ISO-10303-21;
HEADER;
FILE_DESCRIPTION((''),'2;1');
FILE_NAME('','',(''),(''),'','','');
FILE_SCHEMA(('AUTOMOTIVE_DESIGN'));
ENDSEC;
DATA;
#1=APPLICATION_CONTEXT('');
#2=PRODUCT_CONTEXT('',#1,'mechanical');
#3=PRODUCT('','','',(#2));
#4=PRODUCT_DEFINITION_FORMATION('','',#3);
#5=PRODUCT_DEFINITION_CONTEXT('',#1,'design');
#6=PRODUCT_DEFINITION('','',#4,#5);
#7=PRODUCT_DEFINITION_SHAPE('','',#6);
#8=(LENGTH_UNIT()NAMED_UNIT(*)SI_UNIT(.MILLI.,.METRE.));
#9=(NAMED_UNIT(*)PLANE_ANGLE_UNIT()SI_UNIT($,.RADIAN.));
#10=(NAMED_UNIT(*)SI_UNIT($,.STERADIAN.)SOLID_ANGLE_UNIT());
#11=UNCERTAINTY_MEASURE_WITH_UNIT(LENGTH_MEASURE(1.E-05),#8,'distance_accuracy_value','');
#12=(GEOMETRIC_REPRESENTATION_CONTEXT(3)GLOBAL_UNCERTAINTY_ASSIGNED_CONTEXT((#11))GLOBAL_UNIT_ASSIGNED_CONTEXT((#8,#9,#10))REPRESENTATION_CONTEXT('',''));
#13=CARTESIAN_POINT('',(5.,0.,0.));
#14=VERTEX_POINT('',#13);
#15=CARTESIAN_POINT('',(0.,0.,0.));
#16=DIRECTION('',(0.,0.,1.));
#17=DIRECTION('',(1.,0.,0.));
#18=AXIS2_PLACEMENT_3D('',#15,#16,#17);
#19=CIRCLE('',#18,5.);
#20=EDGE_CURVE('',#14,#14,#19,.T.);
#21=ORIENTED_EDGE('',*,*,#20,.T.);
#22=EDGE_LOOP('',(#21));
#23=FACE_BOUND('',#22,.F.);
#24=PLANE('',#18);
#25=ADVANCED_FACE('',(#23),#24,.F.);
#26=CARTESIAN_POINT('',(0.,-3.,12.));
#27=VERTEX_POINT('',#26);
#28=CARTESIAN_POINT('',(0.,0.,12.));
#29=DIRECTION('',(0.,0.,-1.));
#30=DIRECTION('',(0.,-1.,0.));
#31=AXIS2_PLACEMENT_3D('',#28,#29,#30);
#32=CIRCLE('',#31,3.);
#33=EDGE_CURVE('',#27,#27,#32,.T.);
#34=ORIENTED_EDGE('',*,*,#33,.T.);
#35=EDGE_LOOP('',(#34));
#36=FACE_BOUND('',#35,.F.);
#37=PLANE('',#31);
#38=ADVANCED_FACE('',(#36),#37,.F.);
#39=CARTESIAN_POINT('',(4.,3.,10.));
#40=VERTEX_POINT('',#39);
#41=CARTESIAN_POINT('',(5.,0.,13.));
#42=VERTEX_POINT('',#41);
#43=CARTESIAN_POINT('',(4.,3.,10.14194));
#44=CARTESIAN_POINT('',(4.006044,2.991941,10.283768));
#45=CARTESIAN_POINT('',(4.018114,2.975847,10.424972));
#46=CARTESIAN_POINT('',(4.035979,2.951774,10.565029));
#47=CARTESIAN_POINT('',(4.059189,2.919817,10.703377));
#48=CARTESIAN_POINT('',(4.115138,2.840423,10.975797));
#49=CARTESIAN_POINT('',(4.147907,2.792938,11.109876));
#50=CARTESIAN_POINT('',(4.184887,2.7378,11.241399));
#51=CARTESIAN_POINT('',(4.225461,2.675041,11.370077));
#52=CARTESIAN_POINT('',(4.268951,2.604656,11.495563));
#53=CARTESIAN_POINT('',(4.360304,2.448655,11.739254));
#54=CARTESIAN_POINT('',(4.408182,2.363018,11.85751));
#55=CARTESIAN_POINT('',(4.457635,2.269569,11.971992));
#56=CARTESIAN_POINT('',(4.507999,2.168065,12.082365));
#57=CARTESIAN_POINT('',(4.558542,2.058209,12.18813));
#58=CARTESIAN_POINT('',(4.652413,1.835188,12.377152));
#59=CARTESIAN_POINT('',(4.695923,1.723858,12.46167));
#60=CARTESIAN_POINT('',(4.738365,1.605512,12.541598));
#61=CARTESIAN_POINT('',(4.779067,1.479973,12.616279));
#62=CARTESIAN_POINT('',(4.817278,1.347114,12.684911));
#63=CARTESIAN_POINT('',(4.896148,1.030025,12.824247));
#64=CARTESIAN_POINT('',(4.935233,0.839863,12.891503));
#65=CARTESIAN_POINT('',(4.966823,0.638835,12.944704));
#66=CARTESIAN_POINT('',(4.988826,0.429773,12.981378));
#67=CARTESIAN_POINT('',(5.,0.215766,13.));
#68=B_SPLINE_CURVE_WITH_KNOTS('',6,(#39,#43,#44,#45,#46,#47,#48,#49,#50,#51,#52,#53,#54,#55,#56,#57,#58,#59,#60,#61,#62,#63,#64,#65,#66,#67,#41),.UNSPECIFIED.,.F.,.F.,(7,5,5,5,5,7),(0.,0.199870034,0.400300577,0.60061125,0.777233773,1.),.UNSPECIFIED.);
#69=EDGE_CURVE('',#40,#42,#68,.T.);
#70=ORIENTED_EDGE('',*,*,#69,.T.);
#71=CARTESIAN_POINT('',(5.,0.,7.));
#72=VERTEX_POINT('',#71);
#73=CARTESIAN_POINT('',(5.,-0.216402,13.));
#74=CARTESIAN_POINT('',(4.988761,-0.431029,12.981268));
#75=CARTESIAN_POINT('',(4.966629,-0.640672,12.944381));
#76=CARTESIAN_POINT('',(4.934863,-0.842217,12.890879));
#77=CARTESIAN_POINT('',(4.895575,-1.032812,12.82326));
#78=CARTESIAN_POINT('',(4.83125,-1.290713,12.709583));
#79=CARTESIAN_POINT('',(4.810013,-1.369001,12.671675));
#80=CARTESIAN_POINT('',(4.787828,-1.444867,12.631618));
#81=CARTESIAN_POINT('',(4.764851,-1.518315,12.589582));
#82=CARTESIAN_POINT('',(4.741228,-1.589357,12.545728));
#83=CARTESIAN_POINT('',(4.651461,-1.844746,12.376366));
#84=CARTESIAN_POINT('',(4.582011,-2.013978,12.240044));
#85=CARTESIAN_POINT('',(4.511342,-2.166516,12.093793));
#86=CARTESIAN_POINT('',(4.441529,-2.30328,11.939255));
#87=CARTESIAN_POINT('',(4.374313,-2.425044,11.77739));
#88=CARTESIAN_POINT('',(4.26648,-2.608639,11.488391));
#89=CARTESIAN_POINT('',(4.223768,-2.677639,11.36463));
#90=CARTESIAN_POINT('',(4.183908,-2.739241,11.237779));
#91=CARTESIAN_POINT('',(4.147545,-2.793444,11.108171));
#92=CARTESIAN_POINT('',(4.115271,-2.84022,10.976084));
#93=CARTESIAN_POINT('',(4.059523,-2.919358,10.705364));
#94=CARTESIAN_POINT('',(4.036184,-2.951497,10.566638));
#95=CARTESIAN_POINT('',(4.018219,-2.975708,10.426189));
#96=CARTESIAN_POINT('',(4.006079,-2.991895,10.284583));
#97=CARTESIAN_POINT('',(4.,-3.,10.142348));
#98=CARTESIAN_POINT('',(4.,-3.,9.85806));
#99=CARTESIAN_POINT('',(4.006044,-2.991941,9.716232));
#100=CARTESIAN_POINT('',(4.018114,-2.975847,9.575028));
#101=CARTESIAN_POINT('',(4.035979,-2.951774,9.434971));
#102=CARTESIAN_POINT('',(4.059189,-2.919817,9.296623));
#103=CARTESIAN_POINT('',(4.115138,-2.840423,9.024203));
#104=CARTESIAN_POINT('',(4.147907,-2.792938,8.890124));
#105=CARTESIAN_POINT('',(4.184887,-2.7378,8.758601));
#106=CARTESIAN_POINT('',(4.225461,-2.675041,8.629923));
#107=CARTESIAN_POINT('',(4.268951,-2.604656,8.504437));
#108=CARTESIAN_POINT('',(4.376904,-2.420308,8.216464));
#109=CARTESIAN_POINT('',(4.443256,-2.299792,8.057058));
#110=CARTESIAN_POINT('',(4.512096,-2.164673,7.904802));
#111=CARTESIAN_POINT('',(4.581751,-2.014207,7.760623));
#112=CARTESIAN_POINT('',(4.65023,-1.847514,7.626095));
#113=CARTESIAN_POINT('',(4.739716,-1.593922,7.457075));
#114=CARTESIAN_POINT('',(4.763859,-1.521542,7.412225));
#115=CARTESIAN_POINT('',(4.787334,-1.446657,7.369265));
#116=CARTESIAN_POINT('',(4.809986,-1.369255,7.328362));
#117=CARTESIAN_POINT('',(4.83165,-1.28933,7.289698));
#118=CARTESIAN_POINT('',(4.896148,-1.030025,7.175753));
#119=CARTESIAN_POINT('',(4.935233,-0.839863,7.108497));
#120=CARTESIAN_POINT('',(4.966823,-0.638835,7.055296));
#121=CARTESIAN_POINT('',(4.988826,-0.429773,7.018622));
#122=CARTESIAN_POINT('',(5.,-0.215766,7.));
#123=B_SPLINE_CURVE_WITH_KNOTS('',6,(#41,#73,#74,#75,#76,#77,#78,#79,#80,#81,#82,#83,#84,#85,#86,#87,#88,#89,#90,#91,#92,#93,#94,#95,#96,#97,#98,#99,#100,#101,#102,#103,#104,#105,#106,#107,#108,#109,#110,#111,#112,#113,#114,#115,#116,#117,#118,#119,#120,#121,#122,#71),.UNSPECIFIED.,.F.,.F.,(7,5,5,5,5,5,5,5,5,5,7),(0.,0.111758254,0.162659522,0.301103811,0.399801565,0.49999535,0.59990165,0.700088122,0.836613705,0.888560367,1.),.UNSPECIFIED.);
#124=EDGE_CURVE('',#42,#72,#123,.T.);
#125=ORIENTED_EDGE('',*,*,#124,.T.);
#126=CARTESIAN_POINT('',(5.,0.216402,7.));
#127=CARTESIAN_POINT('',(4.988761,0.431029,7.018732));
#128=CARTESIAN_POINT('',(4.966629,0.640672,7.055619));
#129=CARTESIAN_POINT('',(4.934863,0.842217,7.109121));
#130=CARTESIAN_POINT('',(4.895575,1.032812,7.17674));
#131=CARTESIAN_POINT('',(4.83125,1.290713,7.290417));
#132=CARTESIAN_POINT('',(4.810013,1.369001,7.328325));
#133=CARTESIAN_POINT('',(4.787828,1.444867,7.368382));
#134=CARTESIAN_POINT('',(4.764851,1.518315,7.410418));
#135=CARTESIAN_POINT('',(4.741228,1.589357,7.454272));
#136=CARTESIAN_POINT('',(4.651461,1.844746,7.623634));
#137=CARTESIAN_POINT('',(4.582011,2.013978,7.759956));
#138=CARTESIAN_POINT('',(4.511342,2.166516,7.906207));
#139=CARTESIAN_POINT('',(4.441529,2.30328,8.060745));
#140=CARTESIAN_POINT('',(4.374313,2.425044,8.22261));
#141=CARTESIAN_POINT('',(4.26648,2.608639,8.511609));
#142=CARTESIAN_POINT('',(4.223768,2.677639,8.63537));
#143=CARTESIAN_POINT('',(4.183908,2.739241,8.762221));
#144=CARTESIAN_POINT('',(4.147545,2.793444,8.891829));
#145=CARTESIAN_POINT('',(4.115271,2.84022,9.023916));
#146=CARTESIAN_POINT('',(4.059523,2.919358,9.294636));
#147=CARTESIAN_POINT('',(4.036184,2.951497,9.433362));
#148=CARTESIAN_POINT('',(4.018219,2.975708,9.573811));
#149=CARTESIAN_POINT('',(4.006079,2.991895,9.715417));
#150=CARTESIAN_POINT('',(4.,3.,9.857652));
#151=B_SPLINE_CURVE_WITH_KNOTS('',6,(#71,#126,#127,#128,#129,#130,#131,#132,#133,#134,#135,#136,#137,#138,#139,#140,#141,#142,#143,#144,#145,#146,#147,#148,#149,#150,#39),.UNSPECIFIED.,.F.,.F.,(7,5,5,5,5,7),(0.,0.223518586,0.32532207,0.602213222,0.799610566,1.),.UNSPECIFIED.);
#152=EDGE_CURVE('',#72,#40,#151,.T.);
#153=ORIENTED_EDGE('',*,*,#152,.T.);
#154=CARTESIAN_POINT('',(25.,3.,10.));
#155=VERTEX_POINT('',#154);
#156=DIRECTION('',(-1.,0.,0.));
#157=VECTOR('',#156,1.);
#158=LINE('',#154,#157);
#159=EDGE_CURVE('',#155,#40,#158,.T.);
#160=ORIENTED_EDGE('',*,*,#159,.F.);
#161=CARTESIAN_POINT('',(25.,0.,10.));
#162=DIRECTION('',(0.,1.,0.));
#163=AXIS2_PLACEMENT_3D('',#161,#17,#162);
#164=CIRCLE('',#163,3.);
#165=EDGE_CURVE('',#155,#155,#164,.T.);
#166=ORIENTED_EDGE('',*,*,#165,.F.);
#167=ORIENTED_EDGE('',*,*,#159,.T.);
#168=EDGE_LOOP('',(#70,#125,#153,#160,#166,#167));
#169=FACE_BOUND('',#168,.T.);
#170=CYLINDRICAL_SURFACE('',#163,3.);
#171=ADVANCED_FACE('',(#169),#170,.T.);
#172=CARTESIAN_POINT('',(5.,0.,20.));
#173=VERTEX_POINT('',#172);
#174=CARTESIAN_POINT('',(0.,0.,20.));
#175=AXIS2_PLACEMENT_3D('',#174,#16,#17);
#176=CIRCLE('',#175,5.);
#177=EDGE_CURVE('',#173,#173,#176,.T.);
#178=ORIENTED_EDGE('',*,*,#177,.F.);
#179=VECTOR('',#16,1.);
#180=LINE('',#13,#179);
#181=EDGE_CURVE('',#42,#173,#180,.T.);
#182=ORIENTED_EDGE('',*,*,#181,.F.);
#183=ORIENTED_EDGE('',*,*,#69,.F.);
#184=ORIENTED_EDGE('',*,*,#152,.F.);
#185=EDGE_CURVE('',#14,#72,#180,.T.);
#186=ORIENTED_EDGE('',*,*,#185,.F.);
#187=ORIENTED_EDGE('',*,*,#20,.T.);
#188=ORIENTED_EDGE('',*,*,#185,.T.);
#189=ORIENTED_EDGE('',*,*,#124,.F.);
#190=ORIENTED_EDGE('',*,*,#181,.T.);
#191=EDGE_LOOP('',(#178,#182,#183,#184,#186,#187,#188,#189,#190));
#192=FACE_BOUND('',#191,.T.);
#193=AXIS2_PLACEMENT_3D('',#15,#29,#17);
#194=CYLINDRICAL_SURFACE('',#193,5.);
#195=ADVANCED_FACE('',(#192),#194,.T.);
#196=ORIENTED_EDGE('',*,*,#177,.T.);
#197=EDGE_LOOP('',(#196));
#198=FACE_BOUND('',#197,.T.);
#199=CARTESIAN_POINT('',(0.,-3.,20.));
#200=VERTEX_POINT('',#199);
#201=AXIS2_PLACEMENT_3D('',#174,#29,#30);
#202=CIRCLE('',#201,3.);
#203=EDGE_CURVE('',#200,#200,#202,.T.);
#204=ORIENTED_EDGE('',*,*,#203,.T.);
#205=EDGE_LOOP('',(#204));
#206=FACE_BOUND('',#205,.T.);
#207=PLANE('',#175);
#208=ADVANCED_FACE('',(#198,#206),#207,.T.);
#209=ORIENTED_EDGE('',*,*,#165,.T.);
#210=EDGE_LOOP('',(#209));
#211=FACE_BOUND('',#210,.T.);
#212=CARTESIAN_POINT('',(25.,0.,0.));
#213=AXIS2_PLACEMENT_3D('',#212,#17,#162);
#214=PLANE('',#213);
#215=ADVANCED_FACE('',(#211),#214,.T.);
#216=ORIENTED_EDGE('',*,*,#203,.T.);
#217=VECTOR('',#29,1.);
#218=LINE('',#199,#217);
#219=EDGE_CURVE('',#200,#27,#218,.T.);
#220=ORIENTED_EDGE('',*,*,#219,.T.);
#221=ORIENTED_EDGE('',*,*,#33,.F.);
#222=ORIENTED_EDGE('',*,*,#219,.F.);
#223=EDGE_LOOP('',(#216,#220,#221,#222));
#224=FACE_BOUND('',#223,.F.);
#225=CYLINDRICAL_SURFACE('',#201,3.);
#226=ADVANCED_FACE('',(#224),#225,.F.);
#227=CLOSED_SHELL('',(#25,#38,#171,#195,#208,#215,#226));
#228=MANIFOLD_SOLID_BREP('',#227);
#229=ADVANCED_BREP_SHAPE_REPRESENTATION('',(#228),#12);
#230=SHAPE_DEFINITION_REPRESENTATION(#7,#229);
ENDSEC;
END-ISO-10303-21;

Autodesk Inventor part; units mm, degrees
ref_plane "XZ Plane" through (0, 0, 0) normal (0, 1, 0) x (-1, 0, 0)
ref_plane "XY Plane" through (0, 0, 0) normal (0, 0, 1) x (1, 0, 0)
sketch "Sketch1" plane through (0, 0, 0) normal (0, 0, 1) x (1, 0, 0)
  circle A0 centre (0, 0) radius 5
  dimension "d0" = 10
extrude "Extrusion1" add sketch "Sketch1" along normal blind 20
sketch "Sketch2" plane through (0, 0, 20) normal (0, 0, 1) x (1, 0, 0)
  circle A0 centre (0, 0) radius 5 projected
hole "Hole1" at (0, 0, 20) direction (0, 0, -1) diameter 6 depth 8
ref_plane "Work Plane1" through (25, 0, 0) normal (1, 0, 0) x (0, 1, 0)
sketch "Sketch3" plane through (25, 0, 0) normal (1, 0, 0) x (0, 1, 0)
  circle A0 centre (0, 10) radius 3
  line L0 (-5, 0) -> (-5, 20) projected
  point P0 (0, 0)
  point P1 (-5, 10)
  dimension "d11" = 6
extrude "Extrusion2" add sketch "Sketch3" against normal up to surface
thread "Thread1" size "M6x1" class "6g" standard "ISO Metric profile" length 15
properties part number "verbindungunten"
